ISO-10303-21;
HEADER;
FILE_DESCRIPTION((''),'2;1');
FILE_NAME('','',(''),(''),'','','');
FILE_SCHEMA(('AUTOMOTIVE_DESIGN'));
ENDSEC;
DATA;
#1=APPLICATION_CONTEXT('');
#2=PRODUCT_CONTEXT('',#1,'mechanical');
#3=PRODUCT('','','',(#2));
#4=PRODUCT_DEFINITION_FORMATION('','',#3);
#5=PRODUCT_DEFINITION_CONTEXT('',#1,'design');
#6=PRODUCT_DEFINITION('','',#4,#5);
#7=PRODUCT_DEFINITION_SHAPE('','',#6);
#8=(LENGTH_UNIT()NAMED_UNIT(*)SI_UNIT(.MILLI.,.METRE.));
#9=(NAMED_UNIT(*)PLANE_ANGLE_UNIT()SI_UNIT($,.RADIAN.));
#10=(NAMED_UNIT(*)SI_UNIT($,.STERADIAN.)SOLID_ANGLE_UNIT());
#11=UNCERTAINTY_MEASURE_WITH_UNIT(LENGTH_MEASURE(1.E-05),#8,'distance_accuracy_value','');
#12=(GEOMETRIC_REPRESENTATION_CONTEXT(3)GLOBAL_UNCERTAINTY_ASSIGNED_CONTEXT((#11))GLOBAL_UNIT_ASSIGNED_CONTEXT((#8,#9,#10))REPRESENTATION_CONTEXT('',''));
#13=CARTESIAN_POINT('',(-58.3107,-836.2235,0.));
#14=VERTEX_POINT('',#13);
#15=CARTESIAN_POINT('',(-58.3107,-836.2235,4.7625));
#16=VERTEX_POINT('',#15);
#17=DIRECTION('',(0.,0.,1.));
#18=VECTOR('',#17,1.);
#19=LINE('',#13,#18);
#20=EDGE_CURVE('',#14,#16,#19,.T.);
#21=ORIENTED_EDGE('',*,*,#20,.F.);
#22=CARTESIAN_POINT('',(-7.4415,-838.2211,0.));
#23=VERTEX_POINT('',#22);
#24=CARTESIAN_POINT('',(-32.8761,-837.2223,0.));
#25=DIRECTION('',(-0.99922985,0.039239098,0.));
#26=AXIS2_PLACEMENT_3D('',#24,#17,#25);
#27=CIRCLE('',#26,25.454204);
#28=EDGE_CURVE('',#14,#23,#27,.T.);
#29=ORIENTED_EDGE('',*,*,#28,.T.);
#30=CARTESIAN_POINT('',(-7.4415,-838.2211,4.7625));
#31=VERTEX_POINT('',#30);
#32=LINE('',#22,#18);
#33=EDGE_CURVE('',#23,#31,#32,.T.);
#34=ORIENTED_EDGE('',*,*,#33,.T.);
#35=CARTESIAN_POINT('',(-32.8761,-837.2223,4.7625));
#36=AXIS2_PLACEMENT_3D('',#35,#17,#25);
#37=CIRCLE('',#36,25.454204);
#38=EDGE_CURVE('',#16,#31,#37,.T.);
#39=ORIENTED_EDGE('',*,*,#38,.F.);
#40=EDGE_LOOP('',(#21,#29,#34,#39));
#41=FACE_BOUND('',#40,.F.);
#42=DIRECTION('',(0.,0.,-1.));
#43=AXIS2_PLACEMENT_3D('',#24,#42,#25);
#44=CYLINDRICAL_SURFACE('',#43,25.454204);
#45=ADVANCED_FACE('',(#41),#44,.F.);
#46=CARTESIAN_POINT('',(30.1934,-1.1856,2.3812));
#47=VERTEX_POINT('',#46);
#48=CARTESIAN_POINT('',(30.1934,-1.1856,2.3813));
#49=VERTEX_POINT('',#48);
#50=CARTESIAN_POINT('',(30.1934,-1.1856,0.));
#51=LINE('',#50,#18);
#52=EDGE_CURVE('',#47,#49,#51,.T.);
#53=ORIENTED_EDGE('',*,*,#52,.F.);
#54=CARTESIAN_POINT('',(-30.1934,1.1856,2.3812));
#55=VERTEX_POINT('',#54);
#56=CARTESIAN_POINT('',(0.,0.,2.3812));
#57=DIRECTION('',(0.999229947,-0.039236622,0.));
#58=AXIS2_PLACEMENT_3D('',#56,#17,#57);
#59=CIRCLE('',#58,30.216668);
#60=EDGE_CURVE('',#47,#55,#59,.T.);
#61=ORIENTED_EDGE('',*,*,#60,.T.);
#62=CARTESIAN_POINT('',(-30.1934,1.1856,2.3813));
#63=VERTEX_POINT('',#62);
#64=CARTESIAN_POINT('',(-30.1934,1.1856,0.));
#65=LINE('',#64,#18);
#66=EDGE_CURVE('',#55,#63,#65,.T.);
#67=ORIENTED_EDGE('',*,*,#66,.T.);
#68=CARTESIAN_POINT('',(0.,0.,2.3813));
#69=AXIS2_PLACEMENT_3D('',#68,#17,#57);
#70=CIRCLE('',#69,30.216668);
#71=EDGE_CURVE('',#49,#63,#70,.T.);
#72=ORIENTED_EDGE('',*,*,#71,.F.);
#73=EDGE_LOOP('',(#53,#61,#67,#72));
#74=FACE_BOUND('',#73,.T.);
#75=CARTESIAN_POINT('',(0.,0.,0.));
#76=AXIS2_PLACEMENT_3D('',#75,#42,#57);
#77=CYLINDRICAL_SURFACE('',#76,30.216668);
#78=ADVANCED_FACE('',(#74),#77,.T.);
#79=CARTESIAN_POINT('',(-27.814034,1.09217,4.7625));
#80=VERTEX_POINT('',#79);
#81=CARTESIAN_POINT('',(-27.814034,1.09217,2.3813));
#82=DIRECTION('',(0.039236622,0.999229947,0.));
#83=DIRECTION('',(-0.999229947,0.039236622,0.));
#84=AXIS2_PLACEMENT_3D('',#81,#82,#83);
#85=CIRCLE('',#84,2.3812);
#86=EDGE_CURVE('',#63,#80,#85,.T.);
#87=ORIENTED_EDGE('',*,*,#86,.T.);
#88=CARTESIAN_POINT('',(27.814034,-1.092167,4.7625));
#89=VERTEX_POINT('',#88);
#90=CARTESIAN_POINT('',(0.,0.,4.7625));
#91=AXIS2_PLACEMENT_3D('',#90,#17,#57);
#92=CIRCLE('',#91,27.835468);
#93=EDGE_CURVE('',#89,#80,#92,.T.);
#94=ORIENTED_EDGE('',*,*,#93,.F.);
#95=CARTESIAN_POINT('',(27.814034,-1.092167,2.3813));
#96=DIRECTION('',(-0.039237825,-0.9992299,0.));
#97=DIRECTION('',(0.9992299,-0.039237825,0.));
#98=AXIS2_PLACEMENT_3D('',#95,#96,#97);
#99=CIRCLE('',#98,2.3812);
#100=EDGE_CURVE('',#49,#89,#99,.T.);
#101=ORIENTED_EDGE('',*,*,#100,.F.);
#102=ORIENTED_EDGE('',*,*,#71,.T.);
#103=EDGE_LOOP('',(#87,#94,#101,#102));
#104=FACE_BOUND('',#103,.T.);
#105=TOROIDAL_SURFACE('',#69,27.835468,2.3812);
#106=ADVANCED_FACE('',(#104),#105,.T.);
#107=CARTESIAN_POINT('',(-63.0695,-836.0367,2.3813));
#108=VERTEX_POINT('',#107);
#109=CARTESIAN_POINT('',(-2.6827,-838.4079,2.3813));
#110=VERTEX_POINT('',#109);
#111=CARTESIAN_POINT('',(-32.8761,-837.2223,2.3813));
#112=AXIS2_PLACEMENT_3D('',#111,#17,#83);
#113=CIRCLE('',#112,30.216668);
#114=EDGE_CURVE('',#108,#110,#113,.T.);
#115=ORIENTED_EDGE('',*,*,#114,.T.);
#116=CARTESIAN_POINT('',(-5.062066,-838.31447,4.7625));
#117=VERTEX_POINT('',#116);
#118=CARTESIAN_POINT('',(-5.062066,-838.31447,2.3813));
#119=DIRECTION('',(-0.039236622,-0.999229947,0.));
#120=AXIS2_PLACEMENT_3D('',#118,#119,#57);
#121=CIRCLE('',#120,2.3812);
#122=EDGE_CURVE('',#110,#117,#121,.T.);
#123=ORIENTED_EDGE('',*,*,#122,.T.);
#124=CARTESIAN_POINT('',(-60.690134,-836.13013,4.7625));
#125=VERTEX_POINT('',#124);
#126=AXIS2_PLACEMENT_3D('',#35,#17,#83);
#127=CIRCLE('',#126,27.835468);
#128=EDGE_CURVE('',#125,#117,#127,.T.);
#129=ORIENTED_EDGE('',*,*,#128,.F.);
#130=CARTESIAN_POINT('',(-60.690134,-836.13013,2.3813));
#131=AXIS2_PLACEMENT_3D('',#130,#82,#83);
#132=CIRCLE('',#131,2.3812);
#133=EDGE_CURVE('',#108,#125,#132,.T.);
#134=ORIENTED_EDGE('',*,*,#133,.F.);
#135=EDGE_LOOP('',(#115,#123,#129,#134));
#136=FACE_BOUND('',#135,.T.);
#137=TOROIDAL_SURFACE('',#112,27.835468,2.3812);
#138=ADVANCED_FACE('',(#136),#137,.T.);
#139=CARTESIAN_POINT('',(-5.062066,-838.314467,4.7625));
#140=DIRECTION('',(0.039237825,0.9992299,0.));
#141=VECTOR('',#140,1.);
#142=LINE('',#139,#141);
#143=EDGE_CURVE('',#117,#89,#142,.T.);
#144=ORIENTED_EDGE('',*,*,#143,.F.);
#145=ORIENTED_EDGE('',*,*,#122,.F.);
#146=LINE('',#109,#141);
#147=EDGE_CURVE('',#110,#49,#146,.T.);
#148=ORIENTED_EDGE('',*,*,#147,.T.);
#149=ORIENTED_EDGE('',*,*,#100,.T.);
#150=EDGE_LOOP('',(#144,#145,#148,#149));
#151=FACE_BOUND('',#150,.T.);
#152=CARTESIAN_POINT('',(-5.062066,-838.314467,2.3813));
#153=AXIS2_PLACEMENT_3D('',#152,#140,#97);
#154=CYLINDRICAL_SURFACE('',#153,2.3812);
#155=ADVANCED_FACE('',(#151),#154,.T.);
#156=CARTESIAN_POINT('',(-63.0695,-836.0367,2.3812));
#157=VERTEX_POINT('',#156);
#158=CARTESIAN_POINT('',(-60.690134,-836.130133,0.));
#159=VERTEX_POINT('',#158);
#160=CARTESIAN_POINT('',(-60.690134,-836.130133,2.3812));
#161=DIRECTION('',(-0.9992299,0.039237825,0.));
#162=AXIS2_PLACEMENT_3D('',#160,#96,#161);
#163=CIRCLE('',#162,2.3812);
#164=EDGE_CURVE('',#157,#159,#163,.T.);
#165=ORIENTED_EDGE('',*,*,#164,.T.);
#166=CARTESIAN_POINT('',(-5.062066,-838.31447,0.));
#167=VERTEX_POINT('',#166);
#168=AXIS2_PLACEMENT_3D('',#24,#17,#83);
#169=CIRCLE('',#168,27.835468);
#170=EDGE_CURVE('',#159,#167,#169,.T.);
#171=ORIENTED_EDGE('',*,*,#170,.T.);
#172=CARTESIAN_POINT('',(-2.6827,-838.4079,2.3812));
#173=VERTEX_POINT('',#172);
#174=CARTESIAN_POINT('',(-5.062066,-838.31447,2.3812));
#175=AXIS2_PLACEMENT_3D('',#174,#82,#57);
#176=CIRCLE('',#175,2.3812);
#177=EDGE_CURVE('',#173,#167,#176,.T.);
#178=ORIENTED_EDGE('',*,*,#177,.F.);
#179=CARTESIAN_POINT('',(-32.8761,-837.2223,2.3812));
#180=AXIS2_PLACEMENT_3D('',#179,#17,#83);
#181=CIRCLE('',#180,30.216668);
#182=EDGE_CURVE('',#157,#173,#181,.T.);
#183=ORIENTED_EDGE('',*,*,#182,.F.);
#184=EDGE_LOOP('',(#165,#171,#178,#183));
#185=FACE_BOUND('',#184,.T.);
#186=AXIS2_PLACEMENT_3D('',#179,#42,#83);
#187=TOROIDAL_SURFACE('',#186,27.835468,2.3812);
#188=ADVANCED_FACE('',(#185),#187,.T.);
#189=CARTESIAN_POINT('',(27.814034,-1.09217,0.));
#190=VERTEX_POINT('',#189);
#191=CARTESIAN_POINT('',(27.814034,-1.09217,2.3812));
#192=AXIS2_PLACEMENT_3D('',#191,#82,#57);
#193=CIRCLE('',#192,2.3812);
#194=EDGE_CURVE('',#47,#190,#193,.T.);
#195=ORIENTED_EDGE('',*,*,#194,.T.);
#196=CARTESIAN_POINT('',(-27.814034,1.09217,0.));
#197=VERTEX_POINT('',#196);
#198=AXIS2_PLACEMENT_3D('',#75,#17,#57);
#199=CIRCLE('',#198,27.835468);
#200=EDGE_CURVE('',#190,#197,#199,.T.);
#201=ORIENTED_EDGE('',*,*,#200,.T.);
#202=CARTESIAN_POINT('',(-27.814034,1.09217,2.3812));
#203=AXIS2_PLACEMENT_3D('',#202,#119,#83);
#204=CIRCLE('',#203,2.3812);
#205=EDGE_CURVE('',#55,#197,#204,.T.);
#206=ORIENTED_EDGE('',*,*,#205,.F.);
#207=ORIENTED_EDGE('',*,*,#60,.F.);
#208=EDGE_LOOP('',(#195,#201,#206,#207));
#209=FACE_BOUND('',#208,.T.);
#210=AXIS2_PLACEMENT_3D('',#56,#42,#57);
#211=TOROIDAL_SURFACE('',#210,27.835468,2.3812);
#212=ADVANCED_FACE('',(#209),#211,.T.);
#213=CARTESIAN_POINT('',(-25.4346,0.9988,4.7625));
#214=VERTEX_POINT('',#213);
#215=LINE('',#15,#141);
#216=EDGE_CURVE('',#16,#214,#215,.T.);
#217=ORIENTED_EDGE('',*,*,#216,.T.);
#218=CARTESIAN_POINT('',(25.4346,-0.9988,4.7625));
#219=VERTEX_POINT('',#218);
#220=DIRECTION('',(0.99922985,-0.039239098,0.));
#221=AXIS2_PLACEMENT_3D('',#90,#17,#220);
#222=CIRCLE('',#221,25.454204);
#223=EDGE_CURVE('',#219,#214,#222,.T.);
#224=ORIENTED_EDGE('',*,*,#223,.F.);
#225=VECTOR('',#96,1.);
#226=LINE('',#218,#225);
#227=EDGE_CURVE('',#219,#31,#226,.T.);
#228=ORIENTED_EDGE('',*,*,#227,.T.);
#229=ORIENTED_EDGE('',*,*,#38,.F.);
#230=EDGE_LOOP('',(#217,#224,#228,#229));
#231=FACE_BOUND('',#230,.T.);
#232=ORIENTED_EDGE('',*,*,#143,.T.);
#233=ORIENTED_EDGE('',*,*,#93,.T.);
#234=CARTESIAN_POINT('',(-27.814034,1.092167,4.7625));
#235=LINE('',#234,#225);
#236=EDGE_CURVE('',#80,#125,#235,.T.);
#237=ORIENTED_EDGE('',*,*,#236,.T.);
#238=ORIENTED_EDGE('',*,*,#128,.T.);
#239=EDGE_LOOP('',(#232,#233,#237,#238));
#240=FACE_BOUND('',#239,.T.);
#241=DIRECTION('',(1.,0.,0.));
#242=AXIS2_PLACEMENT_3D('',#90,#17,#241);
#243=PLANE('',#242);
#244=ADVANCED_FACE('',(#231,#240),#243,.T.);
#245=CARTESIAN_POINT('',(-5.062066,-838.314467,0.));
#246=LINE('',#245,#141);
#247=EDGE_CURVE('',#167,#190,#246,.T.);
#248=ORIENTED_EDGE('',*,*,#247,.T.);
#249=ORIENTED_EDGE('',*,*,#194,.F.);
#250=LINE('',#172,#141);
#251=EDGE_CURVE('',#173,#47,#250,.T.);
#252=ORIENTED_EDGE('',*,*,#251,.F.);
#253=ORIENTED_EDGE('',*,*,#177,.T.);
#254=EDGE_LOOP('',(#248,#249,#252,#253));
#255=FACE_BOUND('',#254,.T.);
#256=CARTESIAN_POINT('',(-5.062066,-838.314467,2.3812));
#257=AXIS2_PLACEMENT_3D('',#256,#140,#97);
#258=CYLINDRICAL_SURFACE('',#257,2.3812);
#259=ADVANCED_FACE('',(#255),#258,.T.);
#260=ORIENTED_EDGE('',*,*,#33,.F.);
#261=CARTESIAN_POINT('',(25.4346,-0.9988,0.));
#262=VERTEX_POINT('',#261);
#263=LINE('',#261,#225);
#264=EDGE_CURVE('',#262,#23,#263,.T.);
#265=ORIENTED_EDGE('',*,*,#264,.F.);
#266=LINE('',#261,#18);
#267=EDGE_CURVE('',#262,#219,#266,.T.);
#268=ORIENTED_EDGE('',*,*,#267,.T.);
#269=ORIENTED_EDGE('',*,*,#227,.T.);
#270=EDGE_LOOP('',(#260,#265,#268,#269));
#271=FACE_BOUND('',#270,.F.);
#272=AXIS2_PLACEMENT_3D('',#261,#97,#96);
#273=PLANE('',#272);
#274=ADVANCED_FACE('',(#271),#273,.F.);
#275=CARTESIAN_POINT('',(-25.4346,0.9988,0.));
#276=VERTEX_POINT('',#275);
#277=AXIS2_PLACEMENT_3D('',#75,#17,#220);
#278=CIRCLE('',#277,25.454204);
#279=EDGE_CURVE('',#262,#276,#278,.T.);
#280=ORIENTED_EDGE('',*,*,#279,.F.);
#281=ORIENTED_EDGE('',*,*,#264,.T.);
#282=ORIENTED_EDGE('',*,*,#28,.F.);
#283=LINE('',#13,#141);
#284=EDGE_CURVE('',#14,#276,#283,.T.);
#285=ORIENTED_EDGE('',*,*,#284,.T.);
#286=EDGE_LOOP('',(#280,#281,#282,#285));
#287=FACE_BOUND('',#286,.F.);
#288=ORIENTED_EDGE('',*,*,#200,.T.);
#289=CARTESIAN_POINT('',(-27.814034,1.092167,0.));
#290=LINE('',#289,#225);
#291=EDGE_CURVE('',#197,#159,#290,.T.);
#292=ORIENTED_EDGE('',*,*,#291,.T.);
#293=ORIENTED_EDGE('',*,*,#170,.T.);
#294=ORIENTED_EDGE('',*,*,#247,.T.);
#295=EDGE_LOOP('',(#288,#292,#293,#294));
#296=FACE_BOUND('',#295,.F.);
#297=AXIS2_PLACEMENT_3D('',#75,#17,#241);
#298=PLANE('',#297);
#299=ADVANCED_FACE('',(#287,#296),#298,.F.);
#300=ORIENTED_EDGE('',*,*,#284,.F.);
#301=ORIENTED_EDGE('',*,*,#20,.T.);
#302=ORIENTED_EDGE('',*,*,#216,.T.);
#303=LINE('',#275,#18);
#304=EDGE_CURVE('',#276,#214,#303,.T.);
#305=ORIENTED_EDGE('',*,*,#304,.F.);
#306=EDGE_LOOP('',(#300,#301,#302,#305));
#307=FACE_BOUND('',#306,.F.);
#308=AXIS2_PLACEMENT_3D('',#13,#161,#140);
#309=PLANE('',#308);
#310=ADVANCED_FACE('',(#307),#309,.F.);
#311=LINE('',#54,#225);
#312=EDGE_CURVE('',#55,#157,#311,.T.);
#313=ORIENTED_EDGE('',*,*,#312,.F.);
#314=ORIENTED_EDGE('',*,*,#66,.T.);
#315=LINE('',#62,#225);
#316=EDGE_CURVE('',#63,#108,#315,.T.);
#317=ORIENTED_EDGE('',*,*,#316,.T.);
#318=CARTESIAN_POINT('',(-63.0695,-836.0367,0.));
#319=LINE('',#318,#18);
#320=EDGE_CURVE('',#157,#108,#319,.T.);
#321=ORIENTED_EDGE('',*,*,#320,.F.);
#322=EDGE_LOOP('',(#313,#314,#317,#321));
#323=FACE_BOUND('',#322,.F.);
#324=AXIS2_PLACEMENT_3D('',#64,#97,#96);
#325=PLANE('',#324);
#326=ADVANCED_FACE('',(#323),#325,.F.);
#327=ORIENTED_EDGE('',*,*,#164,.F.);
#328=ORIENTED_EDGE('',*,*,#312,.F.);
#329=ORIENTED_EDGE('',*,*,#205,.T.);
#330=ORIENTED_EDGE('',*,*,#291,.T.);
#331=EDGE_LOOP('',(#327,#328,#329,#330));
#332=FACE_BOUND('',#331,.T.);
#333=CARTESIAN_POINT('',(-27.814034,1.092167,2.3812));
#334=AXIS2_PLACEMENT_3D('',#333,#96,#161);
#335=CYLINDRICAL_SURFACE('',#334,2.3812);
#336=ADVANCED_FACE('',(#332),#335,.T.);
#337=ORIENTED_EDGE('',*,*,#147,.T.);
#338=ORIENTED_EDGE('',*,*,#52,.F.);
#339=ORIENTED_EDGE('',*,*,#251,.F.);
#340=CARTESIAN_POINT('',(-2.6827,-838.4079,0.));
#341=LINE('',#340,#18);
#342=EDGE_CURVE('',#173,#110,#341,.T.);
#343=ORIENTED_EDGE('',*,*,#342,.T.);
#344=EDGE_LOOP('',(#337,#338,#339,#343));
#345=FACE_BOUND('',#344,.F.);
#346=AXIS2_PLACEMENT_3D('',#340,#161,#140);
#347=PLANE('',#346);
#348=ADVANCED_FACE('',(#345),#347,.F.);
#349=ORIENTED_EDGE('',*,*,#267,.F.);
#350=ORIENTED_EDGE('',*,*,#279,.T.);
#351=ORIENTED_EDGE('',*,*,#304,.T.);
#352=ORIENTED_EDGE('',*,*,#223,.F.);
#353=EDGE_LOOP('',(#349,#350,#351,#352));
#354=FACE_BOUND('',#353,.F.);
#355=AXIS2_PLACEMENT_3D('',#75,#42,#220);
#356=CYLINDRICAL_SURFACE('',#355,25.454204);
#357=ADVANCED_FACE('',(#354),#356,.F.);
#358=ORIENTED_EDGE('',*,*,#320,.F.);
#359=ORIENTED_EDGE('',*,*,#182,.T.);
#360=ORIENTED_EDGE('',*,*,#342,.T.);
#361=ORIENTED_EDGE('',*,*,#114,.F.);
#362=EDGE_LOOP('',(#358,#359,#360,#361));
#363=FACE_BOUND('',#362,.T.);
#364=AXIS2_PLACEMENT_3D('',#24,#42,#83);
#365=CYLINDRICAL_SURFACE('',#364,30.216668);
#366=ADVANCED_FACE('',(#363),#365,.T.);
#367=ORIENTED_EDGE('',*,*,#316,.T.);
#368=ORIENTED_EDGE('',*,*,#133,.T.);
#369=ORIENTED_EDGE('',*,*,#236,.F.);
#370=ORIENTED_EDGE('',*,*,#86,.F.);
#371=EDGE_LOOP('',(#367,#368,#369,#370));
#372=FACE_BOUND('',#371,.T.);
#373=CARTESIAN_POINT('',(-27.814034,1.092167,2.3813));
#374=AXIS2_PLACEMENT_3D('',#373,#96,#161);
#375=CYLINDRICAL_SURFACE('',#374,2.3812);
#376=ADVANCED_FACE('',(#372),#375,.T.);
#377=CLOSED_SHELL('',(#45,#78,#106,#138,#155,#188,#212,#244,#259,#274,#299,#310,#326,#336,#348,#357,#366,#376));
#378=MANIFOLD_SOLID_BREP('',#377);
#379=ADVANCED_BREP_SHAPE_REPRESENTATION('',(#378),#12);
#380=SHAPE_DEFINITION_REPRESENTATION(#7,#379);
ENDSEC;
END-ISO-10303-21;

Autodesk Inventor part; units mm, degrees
ref_plane "YZ Plane" through (0, 0, 0) normal (1, 0, 0) x (0, 1, 0)
ref_plane "XZ Plane" through (0, 0, 0) normal (0, 1, 0) x (-1, 0, 0)
ref_plane "XY Plane" through (0, 0, 0) normal (0, 0, 1) x (1, 0, 0)
sketch "Sketch1" plane through (0, 0, 0) normal (0, 0, 1) x (1, 0, 0)
  arc A0 (25.4346, -0.9988) -> (-25.4346, 0.9988) centre (0, 0) ccw
  arc A1 (-58.3107, -836.2235) -> (-7.4415, -838.2211) centre (-32.8761, -837.2223) ccw
  arc A2 (-63.0695, -836.0367) -> (-2.6827, -838.4079) centre (-32.8761, -837.2223) ccw
  arc A3 (30.1934, -1.1856) -> (-30.1934, 1.1856) centre (0, 0) ccw
  line L0 (-30.1934, 1.1856) -> (-63.0695, -836.0367)
  line L1 (-58.3107, -836.2235) -> (-25.4346, 0.9988)
  line L2 (25.4346, -0.9988) -> (-7.4415, -838.2211)
  line L3 (-2.6827, -838.4079) -> (30.1934, -1.1856)
  dimension "d0" = 4.7625
extrude "Extrusion1" add sketch "Sketch1" along normal blind 4.7625
fillet "Fillet1" radius 2.3813 8 edges at (-34.0618, -867.4157, 4.7625) (-46.6315, -417.4255, 4.7625) (1.1856, 30.1934, 4.7625) (13.7554, -419.7968, 4.7625) (1.1856, 30.1934, 0) (-46.6315, -417.4255, 0) (-34.0618, -867.4157, 0) (13.7554, -419.7968, 0)
properties part number "Belt_Vertical_Long2"
